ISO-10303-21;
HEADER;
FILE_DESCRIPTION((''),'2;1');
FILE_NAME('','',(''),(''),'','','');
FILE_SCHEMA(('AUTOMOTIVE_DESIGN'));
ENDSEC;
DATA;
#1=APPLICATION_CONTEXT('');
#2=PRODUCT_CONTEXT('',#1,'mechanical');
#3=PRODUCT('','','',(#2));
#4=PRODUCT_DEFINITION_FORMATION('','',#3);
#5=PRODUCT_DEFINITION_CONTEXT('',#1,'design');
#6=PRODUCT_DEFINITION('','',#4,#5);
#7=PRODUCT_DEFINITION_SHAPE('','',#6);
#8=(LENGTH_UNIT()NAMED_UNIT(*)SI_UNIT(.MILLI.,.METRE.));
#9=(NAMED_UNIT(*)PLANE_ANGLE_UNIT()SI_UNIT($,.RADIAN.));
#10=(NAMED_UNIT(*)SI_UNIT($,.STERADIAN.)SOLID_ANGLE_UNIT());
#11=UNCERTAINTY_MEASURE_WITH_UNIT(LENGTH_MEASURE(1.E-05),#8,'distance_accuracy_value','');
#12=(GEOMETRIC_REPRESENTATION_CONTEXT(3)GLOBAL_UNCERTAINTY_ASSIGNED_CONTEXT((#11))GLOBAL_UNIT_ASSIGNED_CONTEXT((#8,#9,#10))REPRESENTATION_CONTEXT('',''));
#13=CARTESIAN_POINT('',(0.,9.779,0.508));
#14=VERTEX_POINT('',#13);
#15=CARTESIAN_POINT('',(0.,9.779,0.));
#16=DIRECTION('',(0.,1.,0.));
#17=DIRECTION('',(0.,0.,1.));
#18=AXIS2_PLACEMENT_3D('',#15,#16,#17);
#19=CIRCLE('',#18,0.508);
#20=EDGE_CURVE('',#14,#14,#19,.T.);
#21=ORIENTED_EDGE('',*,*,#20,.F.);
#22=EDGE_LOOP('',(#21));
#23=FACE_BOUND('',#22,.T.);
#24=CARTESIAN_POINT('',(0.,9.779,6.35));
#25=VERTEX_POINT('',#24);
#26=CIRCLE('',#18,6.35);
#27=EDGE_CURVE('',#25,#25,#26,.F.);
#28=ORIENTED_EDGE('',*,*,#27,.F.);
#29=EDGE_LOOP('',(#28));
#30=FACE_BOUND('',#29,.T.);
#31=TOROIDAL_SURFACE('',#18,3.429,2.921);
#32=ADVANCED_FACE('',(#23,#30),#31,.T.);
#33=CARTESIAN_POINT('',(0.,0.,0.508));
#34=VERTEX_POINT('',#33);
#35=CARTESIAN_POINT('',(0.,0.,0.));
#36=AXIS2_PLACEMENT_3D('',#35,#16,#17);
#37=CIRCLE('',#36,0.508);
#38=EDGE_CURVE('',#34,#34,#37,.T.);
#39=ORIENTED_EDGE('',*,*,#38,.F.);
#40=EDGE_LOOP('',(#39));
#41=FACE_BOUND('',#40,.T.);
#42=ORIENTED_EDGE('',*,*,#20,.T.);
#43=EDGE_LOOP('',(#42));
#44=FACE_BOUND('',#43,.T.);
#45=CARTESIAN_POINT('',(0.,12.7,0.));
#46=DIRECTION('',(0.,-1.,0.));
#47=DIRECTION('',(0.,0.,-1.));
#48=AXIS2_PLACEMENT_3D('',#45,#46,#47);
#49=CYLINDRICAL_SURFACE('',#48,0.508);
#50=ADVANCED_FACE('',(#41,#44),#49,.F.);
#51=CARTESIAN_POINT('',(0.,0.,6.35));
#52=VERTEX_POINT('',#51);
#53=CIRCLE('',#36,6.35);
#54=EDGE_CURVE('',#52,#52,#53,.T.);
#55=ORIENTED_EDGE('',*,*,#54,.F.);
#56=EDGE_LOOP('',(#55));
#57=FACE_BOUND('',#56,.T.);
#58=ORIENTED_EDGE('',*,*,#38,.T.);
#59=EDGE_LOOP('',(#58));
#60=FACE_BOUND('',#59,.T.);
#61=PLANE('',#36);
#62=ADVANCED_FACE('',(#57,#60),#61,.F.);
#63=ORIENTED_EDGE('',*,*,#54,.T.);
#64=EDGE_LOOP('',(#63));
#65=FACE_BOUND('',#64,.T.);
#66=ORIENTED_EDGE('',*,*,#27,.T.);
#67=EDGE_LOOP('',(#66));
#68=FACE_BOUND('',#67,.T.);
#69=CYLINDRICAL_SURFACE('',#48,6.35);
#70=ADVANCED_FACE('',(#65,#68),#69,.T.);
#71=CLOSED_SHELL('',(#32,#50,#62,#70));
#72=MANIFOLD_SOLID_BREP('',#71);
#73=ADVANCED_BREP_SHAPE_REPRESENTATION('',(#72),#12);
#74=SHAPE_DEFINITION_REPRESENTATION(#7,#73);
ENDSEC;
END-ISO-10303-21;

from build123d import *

# Parameters (mm, degrees)
SKETCH2_R           = 6.35
SKETCH2_R_2         = 0.508
BOSS_EXTRUDE1_DEPTH = 12.7
FILLET7_R           = 2.921


with BuildPart() as part:
    # Sketch2 → Boss-Extrude1 (new body)
    with BuildSketch(Plane(origin=(0, 0, 0), x_dir=(1, 0, 0), z_dir=(0, 1, 0))):
        with Locations(Location((0, 0, 0), (0, 0, 270))):
            Circle(SKETCH2_R)
        with Locations(Location((0, 0, 0), (0, 0, 270))):
            Circle(SKETCH2_R_2, mode=Mode.SUBTRACT)
    extrude(amount=BOSS_EXTRUDE1_DEPTH)

    # Fillet7
    fillet7_edges = [part.edges().sort_by_distance(p)[0] for p in [
        (0, 12.7, -6.35),
        (0, 12.7, -0.508),
    ]]
    fillet(fillet7_edges, radius=FILLET7_R - 0.0001)  # a hair under: the kernel refuses the full size


solid = part.part
